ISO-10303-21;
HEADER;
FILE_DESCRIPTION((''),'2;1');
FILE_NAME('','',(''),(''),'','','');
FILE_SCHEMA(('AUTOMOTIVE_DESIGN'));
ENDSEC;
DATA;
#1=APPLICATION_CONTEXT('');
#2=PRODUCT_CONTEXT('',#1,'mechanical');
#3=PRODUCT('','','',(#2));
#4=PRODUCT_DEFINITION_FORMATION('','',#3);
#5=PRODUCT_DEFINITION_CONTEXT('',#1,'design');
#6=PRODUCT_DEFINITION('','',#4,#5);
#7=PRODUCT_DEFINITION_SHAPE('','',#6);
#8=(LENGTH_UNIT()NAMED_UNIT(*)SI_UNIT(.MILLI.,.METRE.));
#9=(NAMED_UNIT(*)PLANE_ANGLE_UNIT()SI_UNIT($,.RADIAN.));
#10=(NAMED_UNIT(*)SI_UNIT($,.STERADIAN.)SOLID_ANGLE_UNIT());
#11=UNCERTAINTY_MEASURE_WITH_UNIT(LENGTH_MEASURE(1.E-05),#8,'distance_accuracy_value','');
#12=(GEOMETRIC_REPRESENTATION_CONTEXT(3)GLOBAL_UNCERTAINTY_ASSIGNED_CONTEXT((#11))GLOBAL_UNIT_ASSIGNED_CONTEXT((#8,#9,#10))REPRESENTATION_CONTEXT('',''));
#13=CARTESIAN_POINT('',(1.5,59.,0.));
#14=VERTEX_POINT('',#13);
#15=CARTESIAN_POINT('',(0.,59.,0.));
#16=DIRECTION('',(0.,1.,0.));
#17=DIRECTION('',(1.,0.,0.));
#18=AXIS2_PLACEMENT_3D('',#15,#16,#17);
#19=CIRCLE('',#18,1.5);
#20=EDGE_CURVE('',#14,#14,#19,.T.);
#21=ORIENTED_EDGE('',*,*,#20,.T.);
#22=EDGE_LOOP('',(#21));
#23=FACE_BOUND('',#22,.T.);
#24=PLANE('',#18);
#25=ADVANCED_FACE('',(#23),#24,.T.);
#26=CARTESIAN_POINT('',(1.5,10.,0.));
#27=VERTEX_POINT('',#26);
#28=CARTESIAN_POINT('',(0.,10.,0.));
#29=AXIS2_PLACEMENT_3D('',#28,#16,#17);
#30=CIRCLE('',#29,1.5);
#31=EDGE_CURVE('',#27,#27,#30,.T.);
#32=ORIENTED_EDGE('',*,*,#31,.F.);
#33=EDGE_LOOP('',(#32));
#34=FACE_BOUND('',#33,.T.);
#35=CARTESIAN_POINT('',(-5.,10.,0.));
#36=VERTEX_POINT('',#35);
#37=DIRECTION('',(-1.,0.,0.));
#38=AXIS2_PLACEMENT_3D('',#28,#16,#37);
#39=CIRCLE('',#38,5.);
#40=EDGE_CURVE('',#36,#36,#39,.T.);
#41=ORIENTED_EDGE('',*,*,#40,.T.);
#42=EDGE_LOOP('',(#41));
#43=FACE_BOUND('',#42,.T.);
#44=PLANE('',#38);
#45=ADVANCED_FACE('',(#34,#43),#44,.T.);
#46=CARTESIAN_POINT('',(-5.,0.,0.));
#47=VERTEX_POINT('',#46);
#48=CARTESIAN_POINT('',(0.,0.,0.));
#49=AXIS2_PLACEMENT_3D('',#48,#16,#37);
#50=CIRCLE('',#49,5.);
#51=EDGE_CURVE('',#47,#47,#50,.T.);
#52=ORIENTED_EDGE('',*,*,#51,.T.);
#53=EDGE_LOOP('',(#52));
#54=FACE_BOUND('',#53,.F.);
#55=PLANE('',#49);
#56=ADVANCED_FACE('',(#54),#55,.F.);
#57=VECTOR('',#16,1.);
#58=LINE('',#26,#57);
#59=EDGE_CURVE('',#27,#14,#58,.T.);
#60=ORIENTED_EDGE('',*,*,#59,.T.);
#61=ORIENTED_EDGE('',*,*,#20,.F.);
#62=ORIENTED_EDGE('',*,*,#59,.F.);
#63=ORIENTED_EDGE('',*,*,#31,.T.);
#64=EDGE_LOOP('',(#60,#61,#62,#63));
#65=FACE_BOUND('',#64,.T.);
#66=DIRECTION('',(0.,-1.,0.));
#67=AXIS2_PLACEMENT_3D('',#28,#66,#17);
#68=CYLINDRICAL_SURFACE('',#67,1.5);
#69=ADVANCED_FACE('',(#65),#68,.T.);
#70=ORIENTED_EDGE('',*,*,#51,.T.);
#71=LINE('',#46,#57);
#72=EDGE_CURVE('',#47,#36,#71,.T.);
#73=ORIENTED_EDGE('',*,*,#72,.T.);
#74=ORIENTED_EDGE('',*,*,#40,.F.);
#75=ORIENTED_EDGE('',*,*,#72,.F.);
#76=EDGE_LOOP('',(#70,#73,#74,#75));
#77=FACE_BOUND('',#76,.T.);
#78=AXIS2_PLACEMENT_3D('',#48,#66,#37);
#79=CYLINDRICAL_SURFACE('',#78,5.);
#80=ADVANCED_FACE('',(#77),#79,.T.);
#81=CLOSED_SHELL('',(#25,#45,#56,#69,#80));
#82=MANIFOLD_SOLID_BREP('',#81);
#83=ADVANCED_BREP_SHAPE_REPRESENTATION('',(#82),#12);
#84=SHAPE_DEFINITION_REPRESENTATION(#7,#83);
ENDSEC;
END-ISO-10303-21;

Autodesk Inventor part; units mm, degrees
ref_plane "YZ Plane" through (0, 0, 0) normal (1, 0, 0) x (0, 1, 0)
ref_plane "XZ Plane" through (0, 0, 0) normal (0, 1, 0) x (-1, 0, 0)
ref_plane "XY Plane" through (0, 0, 0) normal (0, 0, 1) x (1, 0, 0)
sketch "Эскиз1" plane through (0, 0, 0) normal (0, 1, 0) x (-1, 0, 0)
  circle A0 centre (0, 0) radius 5
  dimension "d0" = 10
extrude "Выдавливание1" add sketch "Эскиз1" along normal blind 10
sketch "Эскиз2" plane through (0, 10, 0) normal (0, 1, 0) x (1, 0, 0)
  circle A0 centre (0, 0) radius 1.5
  dimension "d3" = 3
extrude "Выдавливание2" add sketch "Эскиз2" along normal blind 49
thread "Резьба1" size "M3x0.5" class "6g" standard "ANSI Metric M Profile" length 4.4
properties part number "Solinoyd_shtok"
